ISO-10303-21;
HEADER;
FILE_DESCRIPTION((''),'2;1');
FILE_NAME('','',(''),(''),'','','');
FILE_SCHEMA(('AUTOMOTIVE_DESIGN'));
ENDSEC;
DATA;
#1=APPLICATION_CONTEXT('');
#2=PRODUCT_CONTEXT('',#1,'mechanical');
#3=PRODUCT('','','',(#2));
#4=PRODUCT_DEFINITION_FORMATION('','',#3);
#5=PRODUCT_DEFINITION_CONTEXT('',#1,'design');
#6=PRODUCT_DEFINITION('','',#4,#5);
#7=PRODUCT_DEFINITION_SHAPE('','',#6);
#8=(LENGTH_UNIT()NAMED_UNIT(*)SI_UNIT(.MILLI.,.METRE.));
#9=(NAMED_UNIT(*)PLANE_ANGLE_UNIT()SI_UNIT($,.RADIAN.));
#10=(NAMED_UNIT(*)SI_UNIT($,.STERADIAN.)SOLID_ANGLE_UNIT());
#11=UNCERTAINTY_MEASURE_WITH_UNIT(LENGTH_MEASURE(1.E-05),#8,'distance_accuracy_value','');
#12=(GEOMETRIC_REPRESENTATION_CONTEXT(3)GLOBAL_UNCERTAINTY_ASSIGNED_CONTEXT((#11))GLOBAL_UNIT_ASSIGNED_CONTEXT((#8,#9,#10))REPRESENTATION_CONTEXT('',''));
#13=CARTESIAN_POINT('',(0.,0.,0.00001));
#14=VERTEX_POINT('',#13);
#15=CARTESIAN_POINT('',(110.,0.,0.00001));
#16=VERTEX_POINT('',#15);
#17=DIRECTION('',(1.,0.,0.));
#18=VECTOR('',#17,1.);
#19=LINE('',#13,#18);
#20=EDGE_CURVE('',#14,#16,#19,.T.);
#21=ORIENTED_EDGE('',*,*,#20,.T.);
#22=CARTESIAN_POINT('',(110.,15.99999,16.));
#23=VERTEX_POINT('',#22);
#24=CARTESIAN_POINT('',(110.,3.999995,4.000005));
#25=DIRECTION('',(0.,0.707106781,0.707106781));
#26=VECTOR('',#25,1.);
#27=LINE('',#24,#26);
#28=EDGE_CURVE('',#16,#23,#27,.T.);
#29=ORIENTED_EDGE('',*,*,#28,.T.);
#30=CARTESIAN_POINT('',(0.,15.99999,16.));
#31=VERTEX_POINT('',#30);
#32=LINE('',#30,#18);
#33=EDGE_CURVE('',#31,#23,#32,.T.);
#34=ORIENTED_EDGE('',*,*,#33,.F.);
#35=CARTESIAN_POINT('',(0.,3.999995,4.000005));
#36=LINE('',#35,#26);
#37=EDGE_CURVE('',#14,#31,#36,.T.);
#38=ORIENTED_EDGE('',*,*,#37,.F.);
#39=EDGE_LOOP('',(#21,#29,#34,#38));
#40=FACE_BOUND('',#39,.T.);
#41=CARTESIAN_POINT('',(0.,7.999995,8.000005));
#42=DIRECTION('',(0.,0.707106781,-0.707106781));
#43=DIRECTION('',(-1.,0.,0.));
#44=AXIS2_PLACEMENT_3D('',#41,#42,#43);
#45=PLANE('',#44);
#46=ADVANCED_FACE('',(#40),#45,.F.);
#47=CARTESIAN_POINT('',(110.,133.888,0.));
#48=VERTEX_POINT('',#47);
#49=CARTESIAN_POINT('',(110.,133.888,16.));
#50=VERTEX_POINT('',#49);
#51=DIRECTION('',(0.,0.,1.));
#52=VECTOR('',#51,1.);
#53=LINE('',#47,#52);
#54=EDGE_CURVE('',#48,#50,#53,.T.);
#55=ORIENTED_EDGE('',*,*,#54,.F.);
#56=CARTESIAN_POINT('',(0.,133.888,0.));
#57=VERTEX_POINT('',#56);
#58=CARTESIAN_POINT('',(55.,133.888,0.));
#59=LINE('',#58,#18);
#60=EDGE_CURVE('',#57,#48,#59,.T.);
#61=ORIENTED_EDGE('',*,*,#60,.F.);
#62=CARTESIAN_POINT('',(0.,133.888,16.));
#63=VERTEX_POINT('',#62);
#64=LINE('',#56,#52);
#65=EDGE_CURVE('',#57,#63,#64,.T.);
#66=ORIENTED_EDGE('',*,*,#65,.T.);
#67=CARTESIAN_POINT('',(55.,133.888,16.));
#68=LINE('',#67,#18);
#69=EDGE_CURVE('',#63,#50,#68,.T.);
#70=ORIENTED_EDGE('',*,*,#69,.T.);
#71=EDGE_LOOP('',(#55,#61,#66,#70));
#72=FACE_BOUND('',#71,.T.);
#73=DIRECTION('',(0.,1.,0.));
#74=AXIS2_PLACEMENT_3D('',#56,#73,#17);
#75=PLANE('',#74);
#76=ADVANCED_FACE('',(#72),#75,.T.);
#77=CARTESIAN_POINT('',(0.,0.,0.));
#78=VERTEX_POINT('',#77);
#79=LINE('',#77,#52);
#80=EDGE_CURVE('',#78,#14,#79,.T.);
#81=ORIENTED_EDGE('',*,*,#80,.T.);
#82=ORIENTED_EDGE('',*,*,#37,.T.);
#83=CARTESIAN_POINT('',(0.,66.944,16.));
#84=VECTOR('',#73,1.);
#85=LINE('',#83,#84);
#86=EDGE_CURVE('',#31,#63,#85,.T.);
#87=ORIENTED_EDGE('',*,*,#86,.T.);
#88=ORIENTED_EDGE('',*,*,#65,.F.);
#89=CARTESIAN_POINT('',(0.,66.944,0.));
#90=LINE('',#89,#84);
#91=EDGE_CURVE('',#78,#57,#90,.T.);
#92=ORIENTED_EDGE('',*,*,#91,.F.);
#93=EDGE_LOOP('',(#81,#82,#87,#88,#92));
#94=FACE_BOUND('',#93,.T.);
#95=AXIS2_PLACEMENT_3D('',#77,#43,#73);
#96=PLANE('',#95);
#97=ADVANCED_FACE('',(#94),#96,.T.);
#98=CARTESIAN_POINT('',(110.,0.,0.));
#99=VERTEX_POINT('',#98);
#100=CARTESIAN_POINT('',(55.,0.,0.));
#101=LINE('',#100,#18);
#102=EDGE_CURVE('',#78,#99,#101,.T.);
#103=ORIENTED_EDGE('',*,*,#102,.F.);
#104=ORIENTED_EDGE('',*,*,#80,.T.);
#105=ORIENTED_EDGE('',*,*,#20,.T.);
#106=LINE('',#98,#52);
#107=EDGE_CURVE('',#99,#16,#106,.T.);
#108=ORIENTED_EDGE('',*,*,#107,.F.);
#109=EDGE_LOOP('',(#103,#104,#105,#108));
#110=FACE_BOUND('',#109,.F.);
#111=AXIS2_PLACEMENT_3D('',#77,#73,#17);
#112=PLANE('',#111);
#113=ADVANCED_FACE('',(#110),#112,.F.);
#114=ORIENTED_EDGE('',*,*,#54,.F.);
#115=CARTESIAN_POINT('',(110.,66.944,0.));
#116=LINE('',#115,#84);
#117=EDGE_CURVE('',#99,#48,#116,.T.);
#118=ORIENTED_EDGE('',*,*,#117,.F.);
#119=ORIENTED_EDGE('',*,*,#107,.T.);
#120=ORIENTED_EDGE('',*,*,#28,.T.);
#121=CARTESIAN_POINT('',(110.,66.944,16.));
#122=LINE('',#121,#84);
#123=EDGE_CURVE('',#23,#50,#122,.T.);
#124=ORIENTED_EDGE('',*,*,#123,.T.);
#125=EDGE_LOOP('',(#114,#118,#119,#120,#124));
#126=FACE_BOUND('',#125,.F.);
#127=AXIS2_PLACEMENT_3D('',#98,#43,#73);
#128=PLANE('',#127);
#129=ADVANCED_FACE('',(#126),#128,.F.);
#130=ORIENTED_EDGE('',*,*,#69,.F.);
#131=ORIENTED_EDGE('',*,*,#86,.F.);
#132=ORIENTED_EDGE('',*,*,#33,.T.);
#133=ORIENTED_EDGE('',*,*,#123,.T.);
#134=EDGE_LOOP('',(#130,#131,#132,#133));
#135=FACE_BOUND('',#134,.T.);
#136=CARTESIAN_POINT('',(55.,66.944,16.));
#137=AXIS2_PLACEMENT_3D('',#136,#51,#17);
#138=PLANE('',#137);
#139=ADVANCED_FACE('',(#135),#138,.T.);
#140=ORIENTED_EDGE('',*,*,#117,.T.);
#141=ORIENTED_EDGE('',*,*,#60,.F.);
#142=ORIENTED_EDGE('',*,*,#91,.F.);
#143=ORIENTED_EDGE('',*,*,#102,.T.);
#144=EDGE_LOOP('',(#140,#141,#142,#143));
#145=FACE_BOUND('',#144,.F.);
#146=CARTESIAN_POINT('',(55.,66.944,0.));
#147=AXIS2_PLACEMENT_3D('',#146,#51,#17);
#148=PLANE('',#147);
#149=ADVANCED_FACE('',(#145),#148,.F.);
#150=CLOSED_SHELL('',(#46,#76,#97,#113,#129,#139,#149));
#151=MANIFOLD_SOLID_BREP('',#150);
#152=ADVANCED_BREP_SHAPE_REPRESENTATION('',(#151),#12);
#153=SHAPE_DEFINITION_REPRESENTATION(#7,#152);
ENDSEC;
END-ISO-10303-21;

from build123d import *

# Parameters (mm, degrees)
F0_W     = 110
F0_H     = 133.888
F1_DEPTH = 16
F2_SIZE  = 15.99999


# Not quite as in the source:
# - a fillet or chamfer is up to 0.001 mm smaller than in the source, because OpenCascade refuses the exact size


with BuildPart() as f1:
    # F0 (on Top) → F1 (new body)
    with BuildSketch(Plane.XY):
        with Locations((55, 66.944)):
            Rectangle(F0_W, F0_H)
    extrude(amount=F1_DEPTH)

    # F2 (size 16 in the source; OpenCascade refuses exactly that, so slightly less here)
    f2_edges = [f1.edges().sort_by_distance(p)[0] for p in [
        (55, 0, 16),
    ]]
    chamfer(f2_edges, length=F2_SIZE)


solid = f1.part
